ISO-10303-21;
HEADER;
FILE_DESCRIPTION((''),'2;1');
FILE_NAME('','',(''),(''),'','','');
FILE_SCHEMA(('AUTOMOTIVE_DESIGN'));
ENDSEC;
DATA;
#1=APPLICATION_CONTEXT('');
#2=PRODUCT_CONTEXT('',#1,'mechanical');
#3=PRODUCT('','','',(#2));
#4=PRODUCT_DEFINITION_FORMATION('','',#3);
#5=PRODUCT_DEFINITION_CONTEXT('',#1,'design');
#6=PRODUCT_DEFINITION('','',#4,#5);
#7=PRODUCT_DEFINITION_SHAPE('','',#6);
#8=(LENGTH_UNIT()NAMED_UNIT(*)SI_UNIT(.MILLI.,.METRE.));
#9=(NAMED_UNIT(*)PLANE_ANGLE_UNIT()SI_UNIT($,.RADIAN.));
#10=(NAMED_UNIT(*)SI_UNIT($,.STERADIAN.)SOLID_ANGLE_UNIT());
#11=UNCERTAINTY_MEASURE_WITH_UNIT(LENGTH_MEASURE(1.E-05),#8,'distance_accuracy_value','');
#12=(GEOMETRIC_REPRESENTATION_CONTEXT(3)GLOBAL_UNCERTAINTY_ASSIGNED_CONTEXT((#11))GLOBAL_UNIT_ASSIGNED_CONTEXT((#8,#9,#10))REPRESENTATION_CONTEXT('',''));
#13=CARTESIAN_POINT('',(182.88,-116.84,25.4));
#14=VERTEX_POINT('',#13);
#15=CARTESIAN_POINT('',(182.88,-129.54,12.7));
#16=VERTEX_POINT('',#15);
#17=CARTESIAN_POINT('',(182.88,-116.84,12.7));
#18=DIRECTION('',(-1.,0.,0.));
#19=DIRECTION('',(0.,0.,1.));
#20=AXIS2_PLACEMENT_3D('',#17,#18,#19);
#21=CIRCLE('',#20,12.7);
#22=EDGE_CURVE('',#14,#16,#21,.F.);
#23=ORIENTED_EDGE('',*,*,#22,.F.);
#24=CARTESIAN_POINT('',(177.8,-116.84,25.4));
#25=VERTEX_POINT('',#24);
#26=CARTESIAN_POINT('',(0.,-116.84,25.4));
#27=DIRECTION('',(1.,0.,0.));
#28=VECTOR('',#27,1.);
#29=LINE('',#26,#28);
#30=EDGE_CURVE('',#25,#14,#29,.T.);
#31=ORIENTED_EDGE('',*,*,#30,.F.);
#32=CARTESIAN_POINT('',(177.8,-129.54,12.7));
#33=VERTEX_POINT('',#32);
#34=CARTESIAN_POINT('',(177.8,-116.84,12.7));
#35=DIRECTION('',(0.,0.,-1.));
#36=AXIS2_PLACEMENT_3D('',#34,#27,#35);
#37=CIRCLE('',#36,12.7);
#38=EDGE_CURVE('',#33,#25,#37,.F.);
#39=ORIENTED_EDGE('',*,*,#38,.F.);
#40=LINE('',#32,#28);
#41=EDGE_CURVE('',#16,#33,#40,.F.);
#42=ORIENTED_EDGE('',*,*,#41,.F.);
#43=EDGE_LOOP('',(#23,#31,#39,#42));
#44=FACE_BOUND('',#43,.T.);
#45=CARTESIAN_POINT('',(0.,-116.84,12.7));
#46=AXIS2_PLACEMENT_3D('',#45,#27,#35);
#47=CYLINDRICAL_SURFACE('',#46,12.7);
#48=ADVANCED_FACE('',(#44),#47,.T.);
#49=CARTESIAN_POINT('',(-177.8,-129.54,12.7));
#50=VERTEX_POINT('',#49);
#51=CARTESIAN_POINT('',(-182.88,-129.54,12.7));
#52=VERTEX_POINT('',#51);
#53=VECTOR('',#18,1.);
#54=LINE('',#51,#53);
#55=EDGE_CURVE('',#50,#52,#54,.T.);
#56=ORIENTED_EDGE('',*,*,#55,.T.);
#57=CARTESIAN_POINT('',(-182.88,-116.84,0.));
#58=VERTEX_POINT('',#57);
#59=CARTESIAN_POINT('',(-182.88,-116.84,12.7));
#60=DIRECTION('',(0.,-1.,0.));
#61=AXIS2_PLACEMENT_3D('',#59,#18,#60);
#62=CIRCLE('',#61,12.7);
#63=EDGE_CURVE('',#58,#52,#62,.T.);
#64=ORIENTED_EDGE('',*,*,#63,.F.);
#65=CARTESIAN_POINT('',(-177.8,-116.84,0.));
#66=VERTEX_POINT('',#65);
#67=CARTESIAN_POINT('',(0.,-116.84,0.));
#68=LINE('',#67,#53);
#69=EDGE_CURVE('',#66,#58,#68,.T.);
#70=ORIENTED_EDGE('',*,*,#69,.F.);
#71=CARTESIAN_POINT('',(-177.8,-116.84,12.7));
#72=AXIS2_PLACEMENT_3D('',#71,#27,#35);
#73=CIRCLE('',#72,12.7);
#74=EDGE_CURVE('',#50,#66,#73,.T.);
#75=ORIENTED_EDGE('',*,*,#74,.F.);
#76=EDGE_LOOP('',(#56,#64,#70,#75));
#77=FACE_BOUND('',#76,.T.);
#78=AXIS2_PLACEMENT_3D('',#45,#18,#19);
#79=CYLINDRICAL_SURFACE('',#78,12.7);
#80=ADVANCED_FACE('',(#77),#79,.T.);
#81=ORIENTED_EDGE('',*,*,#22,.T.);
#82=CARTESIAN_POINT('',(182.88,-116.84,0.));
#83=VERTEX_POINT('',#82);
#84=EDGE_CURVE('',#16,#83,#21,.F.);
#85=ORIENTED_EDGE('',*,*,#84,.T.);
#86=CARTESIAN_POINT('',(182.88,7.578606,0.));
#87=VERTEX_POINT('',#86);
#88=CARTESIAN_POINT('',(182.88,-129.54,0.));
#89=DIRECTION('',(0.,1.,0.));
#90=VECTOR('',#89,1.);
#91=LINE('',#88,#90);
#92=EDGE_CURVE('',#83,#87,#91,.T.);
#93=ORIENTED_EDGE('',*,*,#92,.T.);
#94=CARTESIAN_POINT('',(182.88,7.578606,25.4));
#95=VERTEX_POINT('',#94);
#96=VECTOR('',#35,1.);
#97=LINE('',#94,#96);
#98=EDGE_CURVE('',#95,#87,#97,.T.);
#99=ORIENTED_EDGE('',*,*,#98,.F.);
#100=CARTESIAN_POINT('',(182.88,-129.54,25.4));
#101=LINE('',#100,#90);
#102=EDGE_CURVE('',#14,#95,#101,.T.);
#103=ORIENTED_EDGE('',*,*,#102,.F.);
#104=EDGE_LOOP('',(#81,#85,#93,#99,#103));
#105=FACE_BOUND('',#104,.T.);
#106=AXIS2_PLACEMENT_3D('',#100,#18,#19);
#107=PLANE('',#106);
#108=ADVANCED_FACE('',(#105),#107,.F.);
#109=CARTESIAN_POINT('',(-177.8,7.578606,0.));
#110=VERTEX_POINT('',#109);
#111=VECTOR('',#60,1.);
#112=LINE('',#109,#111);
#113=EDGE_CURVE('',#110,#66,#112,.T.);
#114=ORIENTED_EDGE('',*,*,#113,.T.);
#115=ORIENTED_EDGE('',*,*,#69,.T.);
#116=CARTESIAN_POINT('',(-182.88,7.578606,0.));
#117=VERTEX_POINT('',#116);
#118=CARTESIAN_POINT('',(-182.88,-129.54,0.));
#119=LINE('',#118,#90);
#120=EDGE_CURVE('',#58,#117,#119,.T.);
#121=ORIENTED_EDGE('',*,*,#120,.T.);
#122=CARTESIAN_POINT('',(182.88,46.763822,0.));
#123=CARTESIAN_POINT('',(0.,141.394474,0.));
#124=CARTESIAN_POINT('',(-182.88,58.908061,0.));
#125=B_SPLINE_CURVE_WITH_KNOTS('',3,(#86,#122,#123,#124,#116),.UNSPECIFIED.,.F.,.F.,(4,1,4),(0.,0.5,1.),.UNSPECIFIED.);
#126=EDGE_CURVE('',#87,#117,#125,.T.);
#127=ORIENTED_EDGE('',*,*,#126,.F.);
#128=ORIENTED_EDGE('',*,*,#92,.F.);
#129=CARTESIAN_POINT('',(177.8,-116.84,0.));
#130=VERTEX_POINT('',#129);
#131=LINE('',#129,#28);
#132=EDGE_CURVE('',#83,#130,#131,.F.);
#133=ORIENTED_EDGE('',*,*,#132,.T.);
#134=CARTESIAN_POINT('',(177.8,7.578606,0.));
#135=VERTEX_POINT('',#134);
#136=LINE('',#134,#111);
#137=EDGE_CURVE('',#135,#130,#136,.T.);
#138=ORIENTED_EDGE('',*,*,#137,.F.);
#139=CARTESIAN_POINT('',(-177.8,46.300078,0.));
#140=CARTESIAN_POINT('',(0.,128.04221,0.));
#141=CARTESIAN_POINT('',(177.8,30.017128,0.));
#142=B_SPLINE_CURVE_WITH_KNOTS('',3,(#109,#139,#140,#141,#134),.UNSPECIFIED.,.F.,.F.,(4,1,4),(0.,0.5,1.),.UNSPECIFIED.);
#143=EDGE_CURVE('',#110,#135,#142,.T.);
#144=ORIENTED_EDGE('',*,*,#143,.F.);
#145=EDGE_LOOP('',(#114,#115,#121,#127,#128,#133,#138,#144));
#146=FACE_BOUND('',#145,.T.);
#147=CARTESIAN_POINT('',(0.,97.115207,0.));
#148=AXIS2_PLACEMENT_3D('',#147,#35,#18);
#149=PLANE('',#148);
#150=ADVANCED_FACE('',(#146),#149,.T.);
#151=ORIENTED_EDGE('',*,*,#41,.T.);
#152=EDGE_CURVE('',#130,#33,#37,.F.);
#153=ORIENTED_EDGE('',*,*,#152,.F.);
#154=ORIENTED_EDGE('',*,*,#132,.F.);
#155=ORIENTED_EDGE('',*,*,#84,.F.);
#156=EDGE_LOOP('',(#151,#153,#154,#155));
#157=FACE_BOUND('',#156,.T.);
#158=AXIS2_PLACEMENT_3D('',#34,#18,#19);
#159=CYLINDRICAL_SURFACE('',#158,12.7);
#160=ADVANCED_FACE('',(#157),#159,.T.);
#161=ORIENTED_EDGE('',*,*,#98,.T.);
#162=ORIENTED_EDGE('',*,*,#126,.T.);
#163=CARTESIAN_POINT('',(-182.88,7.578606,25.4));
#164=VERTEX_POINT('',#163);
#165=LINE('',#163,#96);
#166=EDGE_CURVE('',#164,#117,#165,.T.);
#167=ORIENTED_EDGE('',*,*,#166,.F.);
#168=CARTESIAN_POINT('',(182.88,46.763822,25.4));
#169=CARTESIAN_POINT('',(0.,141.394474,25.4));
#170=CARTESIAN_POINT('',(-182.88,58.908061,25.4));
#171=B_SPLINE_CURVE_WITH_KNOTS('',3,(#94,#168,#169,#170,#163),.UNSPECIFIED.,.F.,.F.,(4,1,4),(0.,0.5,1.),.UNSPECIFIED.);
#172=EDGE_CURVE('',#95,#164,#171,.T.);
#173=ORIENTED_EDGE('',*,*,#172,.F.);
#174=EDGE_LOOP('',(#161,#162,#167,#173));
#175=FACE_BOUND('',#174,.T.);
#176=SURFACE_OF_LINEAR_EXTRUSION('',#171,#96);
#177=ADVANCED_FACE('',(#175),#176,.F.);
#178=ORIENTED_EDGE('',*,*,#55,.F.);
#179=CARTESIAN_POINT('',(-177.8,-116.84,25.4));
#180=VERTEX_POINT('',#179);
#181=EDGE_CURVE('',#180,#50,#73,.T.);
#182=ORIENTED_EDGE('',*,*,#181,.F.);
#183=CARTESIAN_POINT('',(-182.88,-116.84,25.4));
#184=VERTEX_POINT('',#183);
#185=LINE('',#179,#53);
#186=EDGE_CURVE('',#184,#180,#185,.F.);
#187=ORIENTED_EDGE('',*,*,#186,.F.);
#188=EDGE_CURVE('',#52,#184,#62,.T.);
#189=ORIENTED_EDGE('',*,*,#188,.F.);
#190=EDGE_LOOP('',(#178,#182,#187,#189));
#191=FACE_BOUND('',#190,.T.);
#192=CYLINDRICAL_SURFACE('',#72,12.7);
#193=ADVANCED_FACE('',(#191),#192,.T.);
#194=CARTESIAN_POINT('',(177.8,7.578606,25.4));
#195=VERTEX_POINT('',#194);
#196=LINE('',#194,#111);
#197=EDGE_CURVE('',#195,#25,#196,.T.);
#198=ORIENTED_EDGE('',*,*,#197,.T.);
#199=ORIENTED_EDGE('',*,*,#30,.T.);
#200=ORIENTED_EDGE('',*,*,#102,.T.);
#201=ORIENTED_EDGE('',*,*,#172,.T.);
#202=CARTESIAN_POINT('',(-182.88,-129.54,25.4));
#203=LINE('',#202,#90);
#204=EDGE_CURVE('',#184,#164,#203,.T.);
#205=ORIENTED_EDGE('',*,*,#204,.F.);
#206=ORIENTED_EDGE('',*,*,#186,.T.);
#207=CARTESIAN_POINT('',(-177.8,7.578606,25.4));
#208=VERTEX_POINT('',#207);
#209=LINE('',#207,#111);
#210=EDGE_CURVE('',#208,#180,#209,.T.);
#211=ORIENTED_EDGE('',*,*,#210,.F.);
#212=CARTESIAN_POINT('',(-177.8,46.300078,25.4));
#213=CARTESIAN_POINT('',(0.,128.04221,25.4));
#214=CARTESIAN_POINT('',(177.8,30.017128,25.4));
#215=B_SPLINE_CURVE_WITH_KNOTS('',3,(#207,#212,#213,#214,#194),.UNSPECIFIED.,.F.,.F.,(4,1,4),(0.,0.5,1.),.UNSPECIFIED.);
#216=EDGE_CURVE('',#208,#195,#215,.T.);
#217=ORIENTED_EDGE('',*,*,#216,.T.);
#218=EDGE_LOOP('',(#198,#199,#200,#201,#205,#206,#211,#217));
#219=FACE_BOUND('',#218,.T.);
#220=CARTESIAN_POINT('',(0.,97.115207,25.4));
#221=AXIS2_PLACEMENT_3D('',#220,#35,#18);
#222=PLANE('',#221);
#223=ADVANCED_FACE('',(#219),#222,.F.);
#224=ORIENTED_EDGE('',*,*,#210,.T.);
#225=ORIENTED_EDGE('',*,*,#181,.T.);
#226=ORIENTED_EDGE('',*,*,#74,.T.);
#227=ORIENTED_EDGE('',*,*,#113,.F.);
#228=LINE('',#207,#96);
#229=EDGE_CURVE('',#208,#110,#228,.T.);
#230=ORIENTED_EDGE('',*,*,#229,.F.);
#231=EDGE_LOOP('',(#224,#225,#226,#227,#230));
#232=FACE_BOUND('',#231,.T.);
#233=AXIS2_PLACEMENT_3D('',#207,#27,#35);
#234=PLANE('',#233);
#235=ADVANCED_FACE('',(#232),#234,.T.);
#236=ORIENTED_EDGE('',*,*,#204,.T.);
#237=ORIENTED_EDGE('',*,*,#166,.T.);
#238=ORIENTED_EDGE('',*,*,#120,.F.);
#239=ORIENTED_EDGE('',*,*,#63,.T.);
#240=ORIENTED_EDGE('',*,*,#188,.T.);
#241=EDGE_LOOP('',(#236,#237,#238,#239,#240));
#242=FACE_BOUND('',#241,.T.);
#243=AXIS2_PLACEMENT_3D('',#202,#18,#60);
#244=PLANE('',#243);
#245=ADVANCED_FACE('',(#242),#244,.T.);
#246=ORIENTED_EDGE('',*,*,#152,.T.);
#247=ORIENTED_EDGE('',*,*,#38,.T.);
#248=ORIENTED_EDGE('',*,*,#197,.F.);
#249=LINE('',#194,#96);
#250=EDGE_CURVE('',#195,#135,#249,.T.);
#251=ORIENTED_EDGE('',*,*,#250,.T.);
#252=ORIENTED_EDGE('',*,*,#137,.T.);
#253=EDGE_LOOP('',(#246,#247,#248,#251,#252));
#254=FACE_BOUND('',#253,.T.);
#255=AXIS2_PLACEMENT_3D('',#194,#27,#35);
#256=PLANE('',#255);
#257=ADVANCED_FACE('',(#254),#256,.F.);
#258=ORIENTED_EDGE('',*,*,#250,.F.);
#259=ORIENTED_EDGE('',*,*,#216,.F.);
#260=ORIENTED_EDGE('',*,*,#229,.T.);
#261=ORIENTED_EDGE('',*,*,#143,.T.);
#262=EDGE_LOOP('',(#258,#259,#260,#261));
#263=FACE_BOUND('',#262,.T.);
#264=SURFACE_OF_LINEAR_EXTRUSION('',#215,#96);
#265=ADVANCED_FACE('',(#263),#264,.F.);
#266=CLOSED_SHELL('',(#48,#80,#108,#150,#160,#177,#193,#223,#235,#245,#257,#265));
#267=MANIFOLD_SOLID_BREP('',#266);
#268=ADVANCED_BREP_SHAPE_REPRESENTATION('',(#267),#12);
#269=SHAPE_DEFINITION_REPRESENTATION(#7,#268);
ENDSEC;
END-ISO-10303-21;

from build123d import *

# Parameters (mm, degrees)
BOSS_EXTRUDE2_DEPTH = 25.4
FILLET1_R           = 12.7
FILLET2_R           = 12.7


with BuildPart() as part:
    # Sketch3 → Boss-Extrude2 (new body)
    with BuildSketch(Plane.XY):
        with BuildLine():
            Line((-177.8, 7.57860608), (-177.8, -129.54))
            Line((-177.8, -129.54), (-182.88, -129.54))
            Line((-182.88, -129.54), (-182.88, 7.57860608))
            add(Edge.make_bspline(
                [(182.88, 7.57860608), (182.88, 46.763821962), (0, 141.394473708), (-182.88, 58.90806056), (-182.88, 7.57860608)],
                knots=[0, 0, 0, 0, 0.5, 1, 1, 1, 1], degree=3))
            Line((182.88, 7.57860608), (182.88, -129.54))
            Line((182.88, -129.54), (177.8, -129.54))
            Line((177.8, -129.54), (177.8, 7.57860608))
            add(Edge.make_bspline(
                [(-177.8, 7.57860608), (-177.8, 46.300078228), (0, 128.042210108), (177.8, 30.017127825), (177.8, 7.57860608)],
                knots=[0, 0, 0, 0, 0.5, 1, 1, 1, 1], degree=3))
        make_face()
    extrude(amount=BOSS_EXTRUDE2_DEPTH)

    # Fillet1
    fillet1_edges = [part.edges().sort_by_distance(p)[0] for p in [
        (-180.34, -129.54, 0),
        (-180.34, -129.54, 25.4),
    ]]
    fillet(fillet1_edges, radius=FILLET1_R - 0.0001)  # a hair under: the kernel refuses the full size

    # Fillet2
    fillet2_edges = [part.edges().sort_by_distance(p)[0] for p in [
        (180.34, -129.54, 0),
        (180.34, -129.54, 25.4),
    ]]
    fillet(fillet2_edges, radius=FILLET2_R - 0.0001)  # a hair under: the kernel refuses the full size


solid = part.part
